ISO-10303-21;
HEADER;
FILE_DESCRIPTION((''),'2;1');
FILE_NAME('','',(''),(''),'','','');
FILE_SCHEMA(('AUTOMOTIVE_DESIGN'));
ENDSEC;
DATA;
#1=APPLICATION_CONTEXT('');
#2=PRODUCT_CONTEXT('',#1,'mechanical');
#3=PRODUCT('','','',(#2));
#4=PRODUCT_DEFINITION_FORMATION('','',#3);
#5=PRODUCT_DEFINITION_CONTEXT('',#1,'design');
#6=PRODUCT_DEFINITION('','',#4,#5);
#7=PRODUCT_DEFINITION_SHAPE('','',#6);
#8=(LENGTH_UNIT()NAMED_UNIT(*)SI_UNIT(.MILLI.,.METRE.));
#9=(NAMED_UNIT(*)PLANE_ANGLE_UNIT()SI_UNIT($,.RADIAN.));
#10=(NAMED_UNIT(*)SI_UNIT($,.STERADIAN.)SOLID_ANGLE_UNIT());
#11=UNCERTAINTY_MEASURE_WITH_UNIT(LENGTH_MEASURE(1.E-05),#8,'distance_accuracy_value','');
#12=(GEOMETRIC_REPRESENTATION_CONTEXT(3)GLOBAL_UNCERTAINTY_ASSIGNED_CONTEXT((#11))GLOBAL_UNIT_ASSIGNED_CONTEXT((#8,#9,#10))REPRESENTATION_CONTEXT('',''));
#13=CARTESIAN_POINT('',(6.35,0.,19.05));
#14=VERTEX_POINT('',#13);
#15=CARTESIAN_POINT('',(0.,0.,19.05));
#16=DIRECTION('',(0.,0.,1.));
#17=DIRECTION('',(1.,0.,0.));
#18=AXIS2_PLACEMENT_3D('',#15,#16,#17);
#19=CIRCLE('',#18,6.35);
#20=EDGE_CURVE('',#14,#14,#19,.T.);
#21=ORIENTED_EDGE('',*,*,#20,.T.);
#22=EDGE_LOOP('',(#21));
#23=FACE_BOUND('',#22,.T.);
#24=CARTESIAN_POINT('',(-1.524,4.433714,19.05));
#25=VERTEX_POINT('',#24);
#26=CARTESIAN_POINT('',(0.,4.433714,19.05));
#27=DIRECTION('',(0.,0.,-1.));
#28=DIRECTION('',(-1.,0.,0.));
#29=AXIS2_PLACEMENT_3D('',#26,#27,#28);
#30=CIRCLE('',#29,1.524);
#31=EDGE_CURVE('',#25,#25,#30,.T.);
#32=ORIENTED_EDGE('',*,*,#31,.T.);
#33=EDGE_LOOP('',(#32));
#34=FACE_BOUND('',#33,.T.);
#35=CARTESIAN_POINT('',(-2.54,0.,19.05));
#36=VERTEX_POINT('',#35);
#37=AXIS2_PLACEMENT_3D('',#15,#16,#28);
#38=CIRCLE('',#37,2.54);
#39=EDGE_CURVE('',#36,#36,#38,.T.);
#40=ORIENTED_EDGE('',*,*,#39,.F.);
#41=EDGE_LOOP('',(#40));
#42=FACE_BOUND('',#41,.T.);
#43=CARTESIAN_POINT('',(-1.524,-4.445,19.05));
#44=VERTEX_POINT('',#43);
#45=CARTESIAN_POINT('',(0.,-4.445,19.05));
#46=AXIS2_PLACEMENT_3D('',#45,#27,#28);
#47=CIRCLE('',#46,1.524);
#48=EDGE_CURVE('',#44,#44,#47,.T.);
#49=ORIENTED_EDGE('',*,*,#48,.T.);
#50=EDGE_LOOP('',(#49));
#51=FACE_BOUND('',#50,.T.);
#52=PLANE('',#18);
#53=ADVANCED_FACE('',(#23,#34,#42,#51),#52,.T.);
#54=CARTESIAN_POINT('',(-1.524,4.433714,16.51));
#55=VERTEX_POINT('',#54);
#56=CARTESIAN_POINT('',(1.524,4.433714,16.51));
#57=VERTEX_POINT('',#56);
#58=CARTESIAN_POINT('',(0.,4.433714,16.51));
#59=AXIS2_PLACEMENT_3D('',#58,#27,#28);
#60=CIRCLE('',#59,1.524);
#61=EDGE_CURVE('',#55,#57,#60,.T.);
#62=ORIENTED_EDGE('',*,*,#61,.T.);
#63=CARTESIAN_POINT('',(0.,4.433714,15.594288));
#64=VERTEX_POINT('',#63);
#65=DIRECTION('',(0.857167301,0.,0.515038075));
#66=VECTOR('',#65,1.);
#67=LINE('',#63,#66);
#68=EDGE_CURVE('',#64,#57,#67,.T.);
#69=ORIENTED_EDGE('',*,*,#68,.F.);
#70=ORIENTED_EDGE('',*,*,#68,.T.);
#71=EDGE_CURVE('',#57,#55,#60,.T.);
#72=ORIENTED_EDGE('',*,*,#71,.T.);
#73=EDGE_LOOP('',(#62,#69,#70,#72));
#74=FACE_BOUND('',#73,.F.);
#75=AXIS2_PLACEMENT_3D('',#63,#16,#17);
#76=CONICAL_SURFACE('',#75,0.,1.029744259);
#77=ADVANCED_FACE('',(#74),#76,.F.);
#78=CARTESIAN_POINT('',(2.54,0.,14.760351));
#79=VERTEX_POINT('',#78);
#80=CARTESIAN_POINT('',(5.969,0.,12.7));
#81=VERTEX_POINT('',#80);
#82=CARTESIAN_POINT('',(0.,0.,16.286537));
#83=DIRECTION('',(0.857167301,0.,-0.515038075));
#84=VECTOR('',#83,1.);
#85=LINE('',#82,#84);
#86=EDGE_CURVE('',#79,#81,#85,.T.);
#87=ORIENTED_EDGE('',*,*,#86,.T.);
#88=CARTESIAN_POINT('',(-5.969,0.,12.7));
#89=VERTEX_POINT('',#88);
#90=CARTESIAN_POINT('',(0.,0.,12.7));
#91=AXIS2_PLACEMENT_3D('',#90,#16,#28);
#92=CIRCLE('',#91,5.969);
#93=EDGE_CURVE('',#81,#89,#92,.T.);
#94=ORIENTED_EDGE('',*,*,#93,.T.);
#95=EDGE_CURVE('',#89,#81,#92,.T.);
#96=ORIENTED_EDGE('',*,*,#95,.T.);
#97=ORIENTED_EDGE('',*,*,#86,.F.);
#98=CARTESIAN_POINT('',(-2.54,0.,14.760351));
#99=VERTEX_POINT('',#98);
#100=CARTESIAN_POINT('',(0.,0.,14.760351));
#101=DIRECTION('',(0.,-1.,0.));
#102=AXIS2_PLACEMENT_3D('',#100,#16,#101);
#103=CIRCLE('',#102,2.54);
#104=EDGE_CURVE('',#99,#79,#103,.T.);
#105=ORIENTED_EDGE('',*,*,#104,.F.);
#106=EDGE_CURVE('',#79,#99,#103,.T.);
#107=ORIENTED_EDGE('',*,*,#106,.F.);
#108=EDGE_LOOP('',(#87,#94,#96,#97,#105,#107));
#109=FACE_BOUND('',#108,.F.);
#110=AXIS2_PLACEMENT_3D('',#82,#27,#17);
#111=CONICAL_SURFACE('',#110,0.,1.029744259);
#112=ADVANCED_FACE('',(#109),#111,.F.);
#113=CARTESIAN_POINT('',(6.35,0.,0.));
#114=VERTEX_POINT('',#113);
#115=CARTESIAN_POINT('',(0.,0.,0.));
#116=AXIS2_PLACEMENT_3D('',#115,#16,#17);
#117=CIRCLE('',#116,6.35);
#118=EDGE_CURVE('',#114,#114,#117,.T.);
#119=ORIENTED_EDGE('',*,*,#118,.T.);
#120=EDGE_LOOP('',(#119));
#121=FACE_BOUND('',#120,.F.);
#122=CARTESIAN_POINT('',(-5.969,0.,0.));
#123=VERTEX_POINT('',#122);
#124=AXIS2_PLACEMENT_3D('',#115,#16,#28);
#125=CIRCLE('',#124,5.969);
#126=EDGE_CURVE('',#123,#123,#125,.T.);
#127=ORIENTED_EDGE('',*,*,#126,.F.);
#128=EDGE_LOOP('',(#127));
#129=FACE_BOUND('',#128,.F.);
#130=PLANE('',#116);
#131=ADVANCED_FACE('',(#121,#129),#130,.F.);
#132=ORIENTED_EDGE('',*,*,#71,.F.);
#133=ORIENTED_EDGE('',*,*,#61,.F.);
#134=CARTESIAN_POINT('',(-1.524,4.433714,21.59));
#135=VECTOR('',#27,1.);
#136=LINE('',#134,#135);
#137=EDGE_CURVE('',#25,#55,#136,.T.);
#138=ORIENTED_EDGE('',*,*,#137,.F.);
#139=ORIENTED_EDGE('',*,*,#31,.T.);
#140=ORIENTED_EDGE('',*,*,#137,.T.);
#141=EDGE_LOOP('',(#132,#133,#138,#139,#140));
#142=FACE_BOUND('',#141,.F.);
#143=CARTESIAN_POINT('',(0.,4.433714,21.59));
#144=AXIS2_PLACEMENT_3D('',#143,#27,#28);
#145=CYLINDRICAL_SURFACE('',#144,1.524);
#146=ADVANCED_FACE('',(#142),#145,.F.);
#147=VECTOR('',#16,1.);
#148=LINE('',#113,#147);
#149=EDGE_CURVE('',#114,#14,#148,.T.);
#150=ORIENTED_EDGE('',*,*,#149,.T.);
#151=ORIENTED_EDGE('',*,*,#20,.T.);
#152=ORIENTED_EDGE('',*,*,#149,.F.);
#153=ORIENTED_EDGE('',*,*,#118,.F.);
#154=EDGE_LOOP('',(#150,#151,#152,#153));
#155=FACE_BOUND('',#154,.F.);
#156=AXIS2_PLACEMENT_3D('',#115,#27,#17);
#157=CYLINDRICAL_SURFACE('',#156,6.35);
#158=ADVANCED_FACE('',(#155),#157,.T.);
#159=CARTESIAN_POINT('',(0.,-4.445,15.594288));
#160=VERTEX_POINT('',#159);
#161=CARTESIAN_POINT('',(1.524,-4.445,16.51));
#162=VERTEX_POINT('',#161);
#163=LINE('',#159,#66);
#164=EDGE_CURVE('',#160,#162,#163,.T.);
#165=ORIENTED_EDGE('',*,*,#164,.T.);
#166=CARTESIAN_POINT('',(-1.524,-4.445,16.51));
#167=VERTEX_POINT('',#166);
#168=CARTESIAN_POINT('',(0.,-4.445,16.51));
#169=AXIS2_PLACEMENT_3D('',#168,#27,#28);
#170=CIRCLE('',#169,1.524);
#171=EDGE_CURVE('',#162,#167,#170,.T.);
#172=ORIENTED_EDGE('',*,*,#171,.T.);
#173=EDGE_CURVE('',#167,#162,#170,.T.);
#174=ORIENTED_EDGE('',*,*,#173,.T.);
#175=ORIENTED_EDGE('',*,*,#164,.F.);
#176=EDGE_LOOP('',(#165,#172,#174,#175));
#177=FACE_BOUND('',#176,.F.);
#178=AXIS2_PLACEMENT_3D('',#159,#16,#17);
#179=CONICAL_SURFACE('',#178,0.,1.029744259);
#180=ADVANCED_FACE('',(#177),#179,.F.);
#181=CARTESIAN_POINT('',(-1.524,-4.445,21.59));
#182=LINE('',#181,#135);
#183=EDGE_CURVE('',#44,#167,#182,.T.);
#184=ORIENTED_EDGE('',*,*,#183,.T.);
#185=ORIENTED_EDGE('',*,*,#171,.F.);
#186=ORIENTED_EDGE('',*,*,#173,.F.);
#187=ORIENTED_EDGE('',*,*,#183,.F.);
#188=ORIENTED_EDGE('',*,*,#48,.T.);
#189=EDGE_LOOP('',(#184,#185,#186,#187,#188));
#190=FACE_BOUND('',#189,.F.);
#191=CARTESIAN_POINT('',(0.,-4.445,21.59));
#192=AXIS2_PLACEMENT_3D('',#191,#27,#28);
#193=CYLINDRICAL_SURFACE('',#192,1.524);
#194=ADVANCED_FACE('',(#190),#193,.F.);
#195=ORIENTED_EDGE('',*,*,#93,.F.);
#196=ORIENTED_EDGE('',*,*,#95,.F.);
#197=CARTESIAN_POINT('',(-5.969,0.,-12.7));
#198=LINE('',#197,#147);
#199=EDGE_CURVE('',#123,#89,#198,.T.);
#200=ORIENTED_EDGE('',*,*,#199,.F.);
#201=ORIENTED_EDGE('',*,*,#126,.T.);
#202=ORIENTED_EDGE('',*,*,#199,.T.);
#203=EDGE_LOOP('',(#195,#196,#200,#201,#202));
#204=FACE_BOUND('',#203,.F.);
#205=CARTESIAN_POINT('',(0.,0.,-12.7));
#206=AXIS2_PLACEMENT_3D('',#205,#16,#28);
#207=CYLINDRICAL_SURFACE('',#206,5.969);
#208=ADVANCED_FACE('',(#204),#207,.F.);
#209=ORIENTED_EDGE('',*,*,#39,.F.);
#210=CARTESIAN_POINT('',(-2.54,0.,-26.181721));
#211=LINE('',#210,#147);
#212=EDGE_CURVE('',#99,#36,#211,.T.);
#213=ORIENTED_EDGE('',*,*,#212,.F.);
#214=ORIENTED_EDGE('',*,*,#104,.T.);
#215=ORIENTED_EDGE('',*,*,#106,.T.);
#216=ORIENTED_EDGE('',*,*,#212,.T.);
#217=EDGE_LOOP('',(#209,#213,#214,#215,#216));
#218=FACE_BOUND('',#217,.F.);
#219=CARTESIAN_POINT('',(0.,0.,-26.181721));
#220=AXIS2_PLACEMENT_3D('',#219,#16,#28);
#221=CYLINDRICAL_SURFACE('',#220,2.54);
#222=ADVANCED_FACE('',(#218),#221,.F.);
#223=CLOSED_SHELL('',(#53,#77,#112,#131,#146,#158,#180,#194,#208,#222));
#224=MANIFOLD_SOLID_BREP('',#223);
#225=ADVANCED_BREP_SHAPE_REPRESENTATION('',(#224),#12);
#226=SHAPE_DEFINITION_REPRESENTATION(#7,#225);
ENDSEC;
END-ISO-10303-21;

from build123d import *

# Parameters (mm, degrees)
F0_R      = 6.35
F1_DEPTH  = 19.05
F3_D      = 5.08
F8_D      = 3.048
F8_DEPTH  = 2.54
F8_TIP    = 0.9157115834
F9_D      = 3.048
F9_DEPTH  = 2.54
F9_TIP    = 0.9157115834
F11_D     = 11.938
F11_DEPTH = 12.7
F11_TIP   = 3.586537035


# Not quite as in the source:
# - the program builds the solid bodies; features that only make, move or delete a surface that nothing else refers to are left out


with BuildPart() as f1:
    # F0 (on Top) → F1 (new body)
    with BuildSketch(Plane.XY):
        Circle(F0_R)
    extrude(amount=F1_DEPTH)

    # F3 (through all)
    with Locations(Plane(origin=(0, 0, 0), x_dir=(1, 0, 0), z_dir=(0, 0, -1))):
        with Locations((0, 0)):
            Hole(F3_D / 2)

    # F8
    with Locations(Plane.XY.offset(19.05)):
        with Locations((0, 4.4337138534)):
            Hole(F8_D / 2, depth=F8_DEPTH)
            with Locations((0, 0, -(F8_DEPTH + F8_TIP / 2))):  # 118° drill point
                Cone(0, F8_D / 2, F8_TIP, mode=Mode.SUBTRACT)

    # F9
    with Locations(Plane.XY.offset(19.05)):
        with Locations((0, -4.445)):
            Hole(F9_D / 2, depth=F9_DEPTH)
            with Locations((0, 0, -(F9_DEPTH + F9_TIP / 2))):  # 118° drill point
                Cone(0, F9_D / 2, F9_TIP, mode=Mode.SUBTRACT)

    # F11
    with Locations(Plane(origin=(0, 0, 0), x_dir=(1, 0, 0), z_dir=(0, 0, -1))):
        with Locations((0, 0)):
            Hole(F11_D / 2, depth=F11_DEPTH)
            with Locations((0, 0, -(F11_DEPTH + F11_TIP / 2))):  # 118° drill point
                Cone(0, F11_D / 2, F11_TIP, mode=Mode.SUBTRACT)


solid = f1.part
